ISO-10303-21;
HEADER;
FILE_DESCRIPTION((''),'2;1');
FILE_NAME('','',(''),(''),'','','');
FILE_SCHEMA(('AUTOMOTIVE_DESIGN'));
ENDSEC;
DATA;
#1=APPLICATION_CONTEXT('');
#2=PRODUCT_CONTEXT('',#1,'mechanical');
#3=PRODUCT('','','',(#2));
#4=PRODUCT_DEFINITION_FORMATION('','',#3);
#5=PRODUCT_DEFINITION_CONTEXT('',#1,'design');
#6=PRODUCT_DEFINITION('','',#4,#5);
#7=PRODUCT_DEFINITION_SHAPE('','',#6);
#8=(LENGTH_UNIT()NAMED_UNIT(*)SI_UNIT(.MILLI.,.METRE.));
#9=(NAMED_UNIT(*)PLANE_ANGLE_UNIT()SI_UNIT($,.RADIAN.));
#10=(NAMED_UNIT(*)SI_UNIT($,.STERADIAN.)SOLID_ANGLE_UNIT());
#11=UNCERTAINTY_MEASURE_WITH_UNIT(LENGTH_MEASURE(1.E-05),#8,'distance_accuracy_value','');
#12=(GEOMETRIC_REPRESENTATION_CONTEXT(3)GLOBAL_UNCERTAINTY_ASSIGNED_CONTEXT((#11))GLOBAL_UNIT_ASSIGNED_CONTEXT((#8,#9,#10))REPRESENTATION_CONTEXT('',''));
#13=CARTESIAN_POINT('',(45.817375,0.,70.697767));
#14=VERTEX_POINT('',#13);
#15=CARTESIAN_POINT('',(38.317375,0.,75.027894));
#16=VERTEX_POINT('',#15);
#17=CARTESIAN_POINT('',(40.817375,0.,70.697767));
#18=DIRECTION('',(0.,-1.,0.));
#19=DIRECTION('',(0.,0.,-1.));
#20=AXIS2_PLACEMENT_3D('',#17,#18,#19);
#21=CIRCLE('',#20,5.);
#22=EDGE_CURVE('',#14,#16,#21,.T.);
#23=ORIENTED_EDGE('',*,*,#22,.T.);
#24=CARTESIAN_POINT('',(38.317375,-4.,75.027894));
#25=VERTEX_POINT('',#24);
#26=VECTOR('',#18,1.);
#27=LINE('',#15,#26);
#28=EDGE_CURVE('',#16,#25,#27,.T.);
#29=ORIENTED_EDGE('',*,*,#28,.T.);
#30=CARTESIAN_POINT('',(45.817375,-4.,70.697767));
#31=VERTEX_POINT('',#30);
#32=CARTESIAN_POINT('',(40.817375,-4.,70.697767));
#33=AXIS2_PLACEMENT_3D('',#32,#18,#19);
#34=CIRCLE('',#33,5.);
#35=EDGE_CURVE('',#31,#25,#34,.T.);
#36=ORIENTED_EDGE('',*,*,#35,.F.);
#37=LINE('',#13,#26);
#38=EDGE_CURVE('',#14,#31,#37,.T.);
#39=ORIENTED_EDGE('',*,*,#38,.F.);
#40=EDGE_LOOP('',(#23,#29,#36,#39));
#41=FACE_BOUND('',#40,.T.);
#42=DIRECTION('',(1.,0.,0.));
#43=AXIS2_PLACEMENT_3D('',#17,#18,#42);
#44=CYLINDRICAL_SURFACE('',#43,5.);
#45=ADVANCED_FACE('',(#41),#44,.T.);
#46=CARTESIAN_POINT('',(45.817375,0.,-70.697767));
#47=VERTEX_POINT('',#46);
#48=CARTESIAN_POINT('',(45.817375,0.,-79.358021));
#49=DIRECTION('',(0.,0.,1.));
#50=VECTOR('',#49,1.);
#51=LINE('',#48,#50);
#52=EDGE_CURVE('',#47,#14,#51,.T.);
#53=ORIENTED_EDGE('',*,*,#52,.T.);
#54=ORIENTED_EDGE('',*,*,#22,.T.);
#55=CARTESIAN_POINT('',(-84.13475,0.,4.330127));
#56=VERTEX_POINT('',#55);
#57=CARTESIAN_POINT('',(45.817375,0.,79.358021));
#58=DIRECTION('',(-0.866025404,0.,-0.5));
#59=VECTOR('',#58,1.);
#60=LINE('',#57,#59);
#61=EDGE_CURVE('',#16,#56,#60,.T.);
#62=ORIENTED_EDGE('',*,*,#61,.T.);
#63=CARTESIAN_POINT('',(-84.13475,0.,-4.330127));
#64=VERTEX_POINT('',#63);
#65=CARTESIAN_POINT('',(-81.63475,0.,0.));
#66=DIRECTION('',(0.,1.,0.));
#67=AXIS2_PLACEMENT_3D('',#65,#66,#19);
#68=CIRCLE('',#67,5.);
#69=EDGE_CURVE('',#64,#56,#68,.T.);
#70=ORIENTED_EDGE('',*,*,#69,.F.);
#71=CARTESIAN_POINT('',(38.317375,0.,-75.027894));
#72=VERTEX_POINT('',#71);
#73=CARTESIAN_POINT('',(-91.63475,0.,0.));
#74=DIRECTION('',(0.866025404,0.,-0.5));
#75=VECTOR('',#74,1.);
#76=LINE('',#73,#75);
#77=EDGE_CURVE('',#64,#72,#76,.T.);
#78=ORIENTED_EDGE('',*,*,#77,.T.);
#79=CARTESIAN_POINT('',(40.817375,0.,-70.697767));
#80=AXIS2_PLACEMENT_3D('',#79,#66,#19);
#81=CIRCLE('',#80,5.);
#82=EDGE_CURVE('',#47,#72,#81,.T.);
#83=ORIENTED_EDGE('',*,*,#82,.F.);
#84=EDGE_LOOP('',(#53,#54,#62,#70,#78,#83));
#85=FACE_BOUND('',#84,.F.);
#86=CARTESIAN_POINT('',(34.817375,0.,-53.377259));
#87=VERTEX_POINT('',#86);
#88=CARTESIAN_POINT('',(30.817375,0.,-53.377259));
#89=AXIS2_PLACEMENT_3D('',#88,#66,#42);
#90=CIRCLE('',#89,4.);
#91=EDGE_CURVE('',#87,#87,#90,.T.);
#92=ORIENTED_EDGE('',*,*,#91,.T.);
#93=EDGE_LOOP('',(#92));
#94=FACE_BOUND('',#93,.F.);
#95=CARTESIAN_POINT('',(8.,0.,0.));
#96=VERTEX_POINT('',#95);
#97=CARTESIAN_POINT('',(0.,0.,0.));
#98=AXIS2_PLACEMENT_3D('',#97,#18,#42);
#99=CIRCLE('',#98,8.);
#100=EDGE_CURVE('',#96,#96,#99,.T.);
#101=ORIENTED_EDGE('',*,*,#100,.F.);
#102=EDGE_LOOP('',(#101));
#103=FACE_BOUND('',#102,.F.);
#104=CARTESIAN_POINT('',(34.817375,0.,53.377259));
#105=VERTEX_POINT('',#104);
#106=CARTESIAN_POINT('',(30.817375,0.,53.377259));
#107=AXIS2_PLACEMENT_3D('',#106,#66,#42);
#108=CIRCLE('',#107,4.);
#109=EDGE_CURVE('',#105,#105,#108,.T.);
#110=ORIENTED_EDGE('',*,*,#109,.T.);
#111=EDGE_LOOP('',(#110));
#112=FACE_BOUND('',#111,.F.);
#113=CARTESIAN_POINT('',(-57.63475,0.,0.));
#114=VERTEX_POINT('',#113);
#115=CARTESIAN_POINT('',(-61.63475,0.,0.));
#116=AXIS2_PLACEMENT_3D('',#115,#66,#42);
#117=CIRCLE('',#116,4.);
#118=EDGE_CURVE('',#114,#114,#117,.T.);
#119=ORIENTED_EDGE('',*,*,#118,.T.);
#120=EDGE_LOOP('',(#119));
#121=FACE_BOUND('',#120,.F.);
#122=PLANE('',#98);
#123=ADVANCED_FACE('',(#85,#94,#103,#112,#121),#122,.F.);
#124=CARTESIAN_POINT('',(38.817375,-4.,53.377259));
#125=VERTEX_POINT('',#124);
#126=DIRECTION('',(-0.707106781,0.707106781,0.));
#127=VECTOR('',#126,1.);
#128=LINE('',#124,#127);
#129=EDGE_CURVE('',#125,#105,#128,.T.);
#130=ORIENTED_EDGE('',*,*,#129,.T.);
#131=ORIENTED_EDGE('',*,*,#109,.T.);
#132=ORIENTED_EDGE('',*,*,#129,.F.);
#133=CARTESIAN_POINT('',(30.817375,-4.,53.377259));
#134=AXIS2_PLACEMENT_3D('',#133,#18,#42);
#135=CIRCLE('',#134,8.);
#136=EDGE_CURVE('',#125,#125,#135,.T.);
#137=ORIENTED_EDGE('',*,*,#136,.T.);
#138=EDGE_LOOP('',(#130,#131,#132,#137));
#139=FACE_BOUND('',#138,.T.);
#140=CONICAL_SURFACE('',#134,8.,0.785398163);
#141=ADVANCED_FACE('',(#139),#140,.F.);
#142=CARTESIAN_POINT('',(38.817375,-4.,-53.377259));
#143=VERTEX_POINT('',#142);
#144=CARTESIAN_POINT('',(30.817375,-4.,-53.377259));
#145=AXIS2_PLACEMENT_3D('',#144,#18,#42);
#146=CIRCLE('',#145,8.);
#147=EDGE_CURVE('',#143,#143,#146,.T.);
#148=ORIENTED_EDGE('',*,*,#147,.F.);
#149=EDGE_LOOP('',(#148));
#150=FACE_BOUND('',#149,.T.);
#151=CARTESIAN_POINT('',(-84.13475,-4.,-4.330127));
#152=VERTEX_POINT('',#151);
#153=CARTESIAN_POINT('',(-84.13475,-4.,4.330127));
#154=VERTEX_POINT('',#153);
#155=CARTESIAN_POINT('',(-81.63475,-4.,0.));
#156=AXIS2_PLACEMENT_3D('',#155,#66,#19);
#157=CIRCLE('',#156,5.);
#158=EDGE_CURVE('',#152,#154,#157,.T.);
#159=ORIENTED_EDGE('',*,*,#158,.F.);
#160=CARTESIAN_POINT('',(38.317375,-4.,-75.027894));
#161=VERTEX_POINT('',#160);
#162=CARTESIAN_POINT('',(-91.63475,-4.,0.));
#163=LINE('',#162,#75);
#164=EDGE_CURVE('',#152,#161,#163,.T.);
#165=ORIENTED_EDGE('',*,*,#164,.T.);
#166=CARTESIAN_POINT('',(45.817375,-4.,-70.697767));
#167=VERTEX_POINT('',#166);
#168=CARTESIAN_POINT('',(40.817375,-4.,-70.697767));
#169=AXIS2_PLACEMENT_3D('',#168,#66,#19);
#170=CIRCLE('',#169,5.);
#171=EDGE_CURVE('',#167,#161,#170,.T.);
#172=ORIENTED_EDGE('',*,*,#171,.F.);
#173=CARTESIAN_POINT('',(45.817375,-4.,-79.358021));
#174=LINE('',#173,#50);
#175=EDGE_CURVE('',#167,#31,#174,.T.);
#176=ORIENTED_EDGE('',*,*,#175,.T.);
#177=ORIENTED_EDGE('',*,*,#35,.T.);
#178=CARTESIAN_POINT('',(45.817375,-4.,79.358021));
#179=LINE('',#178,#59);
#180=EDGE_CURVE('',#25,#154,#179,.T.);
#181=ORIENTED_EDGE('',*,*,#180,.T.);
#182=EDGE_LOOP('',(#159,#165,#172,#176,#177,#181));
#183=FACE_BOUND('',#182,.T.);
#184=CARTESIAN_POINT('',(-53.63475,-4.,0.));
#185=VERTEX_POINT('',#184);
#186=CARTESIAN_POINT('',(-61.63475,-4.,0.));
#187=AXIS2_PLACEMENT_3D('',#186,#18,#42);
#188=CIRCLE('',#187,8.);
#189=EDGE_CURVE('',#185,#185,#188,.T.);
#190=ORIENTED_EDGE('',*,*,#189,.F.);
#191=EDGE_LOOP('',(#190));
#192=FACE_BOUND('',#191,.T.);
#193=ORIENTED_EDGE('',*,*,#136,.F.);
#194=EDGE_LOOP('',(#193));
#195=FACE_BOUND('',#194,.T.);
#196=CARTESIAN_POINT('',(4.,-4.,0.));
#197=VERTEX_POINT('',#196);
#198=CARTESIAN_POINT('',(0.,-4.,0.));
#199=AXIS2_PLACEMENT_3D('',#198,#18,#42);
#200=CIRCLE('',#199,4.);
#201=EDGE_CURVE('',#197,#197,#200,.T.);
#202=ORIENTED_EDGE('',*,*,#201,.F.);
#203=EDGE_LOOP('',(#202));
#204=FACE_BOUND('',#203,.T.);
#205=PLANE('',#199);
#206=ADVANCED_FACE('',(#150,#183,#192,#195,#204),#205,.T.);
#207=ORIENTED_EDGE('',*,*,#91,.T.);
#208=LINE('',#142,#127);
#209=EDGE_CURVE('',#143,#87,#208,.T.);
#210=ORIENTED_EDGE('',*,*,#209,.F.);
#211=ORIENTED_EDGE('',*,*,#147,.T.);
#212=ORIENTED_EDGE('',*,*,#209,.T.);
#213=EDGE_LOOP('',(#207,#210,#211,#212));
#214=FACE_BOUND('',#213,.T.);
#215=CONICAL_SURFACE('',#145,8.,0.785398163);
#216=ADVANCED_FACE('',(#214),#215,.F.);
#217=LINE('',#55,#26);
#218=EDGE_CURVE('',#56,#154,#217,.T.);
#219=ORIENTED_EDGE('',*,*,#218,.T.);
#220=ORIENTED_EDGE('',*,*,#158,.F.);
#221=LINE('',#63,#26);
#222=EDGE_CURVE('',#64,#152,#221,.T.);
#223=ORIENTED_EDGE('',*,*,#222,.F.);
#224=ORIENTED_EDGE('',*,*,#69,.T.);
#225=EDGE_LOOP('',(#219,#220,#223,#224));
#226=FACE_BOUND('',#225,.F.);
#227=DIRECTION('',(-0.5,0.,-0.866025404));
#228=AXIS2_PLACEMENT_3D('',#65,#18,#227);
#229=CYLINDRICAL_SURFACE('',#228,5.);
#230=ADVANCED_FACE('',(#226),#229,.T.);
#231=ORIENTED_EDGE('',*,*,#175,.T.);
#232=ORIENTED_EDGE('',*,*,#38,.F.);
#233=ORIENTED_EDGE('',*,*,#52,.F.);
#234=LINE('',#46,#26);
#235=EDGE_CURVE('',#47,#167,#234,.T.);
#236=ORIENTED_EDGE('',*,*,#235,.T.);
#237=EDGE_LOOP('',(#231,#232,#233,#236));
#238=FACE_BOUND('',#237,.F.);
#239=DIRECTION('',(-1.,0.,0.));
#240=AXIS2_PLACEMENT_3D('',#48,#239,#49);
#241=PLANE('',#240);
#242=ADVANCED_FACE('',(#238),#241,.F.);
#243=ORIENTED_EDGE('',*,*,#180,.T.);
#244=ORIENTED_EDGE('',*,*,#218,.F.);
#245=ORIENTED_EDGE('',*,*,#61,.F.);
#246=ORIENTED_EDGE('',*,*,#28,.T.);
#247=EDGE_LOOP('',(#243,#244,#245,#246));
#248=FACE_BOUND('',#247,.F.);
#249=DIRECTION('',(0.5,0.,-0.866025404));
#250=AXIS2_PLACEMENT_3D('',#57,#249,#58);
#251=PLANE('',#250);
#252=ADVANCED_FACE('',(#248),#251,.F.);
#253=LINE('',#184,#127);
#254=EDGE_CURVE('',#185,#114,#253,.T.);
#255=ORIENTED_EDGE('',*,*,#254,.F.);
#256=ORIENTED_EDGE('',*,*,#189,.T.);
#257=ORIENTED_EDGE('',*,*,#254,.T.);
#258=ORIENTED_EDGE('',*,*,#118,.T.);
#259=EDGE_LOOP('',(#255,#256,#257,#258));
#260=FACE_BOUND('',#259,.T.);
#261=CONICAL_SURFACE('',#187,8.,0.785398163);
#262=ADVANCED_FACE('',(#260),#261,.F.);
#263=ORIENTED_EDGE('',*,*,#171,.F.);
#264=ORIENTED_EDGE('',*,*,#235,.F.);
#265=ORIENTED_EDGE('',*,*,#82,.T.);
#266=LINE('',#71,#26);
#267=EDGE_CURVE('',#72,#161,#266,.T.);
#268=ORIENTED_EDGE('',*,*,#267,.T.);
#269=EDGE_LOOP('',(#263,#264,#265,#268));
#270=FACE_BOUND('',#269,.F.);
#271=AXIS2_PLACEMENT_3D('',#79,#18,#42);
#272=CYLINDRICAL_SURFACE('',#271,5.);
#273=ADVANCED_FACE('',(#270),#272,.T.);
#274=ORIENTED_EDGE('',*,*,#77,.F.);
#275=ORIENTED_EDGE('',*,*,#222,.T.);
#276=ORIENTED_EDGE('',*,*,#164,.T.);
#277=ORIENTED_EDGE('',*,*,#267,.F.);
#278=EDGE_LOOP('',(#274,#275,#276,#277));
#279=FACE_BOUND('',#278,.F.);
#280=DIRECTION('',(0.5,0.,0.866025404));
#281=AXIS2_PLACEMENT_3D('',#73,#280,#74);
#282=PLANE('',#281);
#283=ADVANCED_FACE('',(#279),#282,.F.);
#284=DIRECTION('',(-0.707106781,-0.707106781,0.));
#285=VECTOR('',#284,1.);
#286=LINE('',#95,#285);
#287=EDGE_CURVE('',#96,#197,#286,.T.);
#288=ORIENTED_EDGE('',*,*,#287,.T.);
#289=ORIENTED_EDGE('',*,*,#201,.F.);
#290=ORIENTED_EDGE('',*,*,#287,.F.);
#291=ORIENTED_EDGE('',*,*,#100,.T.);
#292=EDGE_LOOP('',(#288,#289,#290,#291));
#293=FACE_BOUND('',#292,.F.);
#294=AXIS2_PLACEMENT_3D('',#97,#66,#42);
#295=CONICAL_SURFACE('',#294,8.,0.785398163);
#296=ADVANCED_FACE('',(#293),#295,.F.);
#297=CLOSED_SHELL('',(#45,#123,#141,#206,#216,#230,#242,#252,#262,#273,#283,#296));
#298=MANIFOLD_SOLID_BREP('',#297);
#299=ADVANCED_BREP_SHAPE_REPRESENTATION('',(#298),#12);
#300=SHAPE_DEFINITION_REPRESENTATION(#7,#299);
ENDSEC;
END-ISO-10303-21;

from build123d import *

# Parameters (mm, degrees)
F0_R     = 3
F1_DEPTH = 4
F2_R     = 5


# Not quite as in the source:
# - a fillet or chamfer that OpenCascade refuses, or shapes differently, is made with other operations: its cross-section is extruded or revolved along the edge and cut away or added


with BuildPart() as f1:
    # F0 (on Front) → F1 (new body)
    with BuildSketch(Plane.XZ):
        Polygon((45.8173750394, -79.3580214376), (45.8173750394, 79.3580214376), (-91.6347500787, 0), align=None)
        with Locations((30.8173750394, -53.3772593241)):
            Circle(F0_R, mode=Mode.SUBTRACT)
        with Locations((-61.6347500787, 0)):
            Circle(F0_R, mode=Mode.SUBTRACT)
        Circle(F0_R, mode=Mode.SUBTRACT)
        with Locations((30.8173750394, 53.3772593241)):
            Circle(F0_R, mode=Mode.SUBTRACT)
    extrude(amount=F1_DEPTH)

    # F2
    f2_edges = [f1.edges().sort_by_distance(p)[0] for p in [
        (45.817375, -2, 79.358021),
        (45.817375, -2, -79.358021),
        (-91.63475, -2, 0),
    ]]
    fillet(f2_edges, radius=F2_R)

    # F3: chamfer of 5 on 4 edges, made by hand

    # F3_s1 → F3_t2 (revolve, cut)
    with BuildSketch(Plane.XY):
        Polygon((8, 0), (3, -5), (3, 0), align=None)
    revolve(axis=Axis((0, 0, 0), (0, -1, 0)), mode=Mode.SUBTRACT)

    # F3_s3 → F3_t4 (revolve, cut)
    with BuildSketch(Plane.XY):
        Polygon((-53.6347500787, -4), (-58.6347500787, 1), (-58.6347500787, -4), align=None)
    revolve(axis=Axis((-61.6347500787, -4, 0), (0, -1, 0)), mode=Mode.SUBTRACT)

    # F3_s5 → F3_t6 (revolve, cut)
    with BuildSketch(Plane.XY.offset(53.3772593241)):
        Polygon((38.8173750394, -4), (33.8173750394, 1), (33.8173750394, -4), align=None)
    revolve(axis=Axis((30.8173750394, -4, 53.3772593241), (0, -1, 0)), mode=Mode.SUBTRACT)

    # F3_s7 → F3_t8 (revolve, cut)
    with BuildSketch(Plane.XY.offset(-53.3772593241)):
        Polygon((38.8173750394, -4), (33.8173750394, 1), (33.8173750394, -4), align=None)
    revolve(axis=Axis((30.8173750394, -4, -53.3772593241), (0, -1, 0)), mode=Mode.SUBTRACT)


solid = f1.part
